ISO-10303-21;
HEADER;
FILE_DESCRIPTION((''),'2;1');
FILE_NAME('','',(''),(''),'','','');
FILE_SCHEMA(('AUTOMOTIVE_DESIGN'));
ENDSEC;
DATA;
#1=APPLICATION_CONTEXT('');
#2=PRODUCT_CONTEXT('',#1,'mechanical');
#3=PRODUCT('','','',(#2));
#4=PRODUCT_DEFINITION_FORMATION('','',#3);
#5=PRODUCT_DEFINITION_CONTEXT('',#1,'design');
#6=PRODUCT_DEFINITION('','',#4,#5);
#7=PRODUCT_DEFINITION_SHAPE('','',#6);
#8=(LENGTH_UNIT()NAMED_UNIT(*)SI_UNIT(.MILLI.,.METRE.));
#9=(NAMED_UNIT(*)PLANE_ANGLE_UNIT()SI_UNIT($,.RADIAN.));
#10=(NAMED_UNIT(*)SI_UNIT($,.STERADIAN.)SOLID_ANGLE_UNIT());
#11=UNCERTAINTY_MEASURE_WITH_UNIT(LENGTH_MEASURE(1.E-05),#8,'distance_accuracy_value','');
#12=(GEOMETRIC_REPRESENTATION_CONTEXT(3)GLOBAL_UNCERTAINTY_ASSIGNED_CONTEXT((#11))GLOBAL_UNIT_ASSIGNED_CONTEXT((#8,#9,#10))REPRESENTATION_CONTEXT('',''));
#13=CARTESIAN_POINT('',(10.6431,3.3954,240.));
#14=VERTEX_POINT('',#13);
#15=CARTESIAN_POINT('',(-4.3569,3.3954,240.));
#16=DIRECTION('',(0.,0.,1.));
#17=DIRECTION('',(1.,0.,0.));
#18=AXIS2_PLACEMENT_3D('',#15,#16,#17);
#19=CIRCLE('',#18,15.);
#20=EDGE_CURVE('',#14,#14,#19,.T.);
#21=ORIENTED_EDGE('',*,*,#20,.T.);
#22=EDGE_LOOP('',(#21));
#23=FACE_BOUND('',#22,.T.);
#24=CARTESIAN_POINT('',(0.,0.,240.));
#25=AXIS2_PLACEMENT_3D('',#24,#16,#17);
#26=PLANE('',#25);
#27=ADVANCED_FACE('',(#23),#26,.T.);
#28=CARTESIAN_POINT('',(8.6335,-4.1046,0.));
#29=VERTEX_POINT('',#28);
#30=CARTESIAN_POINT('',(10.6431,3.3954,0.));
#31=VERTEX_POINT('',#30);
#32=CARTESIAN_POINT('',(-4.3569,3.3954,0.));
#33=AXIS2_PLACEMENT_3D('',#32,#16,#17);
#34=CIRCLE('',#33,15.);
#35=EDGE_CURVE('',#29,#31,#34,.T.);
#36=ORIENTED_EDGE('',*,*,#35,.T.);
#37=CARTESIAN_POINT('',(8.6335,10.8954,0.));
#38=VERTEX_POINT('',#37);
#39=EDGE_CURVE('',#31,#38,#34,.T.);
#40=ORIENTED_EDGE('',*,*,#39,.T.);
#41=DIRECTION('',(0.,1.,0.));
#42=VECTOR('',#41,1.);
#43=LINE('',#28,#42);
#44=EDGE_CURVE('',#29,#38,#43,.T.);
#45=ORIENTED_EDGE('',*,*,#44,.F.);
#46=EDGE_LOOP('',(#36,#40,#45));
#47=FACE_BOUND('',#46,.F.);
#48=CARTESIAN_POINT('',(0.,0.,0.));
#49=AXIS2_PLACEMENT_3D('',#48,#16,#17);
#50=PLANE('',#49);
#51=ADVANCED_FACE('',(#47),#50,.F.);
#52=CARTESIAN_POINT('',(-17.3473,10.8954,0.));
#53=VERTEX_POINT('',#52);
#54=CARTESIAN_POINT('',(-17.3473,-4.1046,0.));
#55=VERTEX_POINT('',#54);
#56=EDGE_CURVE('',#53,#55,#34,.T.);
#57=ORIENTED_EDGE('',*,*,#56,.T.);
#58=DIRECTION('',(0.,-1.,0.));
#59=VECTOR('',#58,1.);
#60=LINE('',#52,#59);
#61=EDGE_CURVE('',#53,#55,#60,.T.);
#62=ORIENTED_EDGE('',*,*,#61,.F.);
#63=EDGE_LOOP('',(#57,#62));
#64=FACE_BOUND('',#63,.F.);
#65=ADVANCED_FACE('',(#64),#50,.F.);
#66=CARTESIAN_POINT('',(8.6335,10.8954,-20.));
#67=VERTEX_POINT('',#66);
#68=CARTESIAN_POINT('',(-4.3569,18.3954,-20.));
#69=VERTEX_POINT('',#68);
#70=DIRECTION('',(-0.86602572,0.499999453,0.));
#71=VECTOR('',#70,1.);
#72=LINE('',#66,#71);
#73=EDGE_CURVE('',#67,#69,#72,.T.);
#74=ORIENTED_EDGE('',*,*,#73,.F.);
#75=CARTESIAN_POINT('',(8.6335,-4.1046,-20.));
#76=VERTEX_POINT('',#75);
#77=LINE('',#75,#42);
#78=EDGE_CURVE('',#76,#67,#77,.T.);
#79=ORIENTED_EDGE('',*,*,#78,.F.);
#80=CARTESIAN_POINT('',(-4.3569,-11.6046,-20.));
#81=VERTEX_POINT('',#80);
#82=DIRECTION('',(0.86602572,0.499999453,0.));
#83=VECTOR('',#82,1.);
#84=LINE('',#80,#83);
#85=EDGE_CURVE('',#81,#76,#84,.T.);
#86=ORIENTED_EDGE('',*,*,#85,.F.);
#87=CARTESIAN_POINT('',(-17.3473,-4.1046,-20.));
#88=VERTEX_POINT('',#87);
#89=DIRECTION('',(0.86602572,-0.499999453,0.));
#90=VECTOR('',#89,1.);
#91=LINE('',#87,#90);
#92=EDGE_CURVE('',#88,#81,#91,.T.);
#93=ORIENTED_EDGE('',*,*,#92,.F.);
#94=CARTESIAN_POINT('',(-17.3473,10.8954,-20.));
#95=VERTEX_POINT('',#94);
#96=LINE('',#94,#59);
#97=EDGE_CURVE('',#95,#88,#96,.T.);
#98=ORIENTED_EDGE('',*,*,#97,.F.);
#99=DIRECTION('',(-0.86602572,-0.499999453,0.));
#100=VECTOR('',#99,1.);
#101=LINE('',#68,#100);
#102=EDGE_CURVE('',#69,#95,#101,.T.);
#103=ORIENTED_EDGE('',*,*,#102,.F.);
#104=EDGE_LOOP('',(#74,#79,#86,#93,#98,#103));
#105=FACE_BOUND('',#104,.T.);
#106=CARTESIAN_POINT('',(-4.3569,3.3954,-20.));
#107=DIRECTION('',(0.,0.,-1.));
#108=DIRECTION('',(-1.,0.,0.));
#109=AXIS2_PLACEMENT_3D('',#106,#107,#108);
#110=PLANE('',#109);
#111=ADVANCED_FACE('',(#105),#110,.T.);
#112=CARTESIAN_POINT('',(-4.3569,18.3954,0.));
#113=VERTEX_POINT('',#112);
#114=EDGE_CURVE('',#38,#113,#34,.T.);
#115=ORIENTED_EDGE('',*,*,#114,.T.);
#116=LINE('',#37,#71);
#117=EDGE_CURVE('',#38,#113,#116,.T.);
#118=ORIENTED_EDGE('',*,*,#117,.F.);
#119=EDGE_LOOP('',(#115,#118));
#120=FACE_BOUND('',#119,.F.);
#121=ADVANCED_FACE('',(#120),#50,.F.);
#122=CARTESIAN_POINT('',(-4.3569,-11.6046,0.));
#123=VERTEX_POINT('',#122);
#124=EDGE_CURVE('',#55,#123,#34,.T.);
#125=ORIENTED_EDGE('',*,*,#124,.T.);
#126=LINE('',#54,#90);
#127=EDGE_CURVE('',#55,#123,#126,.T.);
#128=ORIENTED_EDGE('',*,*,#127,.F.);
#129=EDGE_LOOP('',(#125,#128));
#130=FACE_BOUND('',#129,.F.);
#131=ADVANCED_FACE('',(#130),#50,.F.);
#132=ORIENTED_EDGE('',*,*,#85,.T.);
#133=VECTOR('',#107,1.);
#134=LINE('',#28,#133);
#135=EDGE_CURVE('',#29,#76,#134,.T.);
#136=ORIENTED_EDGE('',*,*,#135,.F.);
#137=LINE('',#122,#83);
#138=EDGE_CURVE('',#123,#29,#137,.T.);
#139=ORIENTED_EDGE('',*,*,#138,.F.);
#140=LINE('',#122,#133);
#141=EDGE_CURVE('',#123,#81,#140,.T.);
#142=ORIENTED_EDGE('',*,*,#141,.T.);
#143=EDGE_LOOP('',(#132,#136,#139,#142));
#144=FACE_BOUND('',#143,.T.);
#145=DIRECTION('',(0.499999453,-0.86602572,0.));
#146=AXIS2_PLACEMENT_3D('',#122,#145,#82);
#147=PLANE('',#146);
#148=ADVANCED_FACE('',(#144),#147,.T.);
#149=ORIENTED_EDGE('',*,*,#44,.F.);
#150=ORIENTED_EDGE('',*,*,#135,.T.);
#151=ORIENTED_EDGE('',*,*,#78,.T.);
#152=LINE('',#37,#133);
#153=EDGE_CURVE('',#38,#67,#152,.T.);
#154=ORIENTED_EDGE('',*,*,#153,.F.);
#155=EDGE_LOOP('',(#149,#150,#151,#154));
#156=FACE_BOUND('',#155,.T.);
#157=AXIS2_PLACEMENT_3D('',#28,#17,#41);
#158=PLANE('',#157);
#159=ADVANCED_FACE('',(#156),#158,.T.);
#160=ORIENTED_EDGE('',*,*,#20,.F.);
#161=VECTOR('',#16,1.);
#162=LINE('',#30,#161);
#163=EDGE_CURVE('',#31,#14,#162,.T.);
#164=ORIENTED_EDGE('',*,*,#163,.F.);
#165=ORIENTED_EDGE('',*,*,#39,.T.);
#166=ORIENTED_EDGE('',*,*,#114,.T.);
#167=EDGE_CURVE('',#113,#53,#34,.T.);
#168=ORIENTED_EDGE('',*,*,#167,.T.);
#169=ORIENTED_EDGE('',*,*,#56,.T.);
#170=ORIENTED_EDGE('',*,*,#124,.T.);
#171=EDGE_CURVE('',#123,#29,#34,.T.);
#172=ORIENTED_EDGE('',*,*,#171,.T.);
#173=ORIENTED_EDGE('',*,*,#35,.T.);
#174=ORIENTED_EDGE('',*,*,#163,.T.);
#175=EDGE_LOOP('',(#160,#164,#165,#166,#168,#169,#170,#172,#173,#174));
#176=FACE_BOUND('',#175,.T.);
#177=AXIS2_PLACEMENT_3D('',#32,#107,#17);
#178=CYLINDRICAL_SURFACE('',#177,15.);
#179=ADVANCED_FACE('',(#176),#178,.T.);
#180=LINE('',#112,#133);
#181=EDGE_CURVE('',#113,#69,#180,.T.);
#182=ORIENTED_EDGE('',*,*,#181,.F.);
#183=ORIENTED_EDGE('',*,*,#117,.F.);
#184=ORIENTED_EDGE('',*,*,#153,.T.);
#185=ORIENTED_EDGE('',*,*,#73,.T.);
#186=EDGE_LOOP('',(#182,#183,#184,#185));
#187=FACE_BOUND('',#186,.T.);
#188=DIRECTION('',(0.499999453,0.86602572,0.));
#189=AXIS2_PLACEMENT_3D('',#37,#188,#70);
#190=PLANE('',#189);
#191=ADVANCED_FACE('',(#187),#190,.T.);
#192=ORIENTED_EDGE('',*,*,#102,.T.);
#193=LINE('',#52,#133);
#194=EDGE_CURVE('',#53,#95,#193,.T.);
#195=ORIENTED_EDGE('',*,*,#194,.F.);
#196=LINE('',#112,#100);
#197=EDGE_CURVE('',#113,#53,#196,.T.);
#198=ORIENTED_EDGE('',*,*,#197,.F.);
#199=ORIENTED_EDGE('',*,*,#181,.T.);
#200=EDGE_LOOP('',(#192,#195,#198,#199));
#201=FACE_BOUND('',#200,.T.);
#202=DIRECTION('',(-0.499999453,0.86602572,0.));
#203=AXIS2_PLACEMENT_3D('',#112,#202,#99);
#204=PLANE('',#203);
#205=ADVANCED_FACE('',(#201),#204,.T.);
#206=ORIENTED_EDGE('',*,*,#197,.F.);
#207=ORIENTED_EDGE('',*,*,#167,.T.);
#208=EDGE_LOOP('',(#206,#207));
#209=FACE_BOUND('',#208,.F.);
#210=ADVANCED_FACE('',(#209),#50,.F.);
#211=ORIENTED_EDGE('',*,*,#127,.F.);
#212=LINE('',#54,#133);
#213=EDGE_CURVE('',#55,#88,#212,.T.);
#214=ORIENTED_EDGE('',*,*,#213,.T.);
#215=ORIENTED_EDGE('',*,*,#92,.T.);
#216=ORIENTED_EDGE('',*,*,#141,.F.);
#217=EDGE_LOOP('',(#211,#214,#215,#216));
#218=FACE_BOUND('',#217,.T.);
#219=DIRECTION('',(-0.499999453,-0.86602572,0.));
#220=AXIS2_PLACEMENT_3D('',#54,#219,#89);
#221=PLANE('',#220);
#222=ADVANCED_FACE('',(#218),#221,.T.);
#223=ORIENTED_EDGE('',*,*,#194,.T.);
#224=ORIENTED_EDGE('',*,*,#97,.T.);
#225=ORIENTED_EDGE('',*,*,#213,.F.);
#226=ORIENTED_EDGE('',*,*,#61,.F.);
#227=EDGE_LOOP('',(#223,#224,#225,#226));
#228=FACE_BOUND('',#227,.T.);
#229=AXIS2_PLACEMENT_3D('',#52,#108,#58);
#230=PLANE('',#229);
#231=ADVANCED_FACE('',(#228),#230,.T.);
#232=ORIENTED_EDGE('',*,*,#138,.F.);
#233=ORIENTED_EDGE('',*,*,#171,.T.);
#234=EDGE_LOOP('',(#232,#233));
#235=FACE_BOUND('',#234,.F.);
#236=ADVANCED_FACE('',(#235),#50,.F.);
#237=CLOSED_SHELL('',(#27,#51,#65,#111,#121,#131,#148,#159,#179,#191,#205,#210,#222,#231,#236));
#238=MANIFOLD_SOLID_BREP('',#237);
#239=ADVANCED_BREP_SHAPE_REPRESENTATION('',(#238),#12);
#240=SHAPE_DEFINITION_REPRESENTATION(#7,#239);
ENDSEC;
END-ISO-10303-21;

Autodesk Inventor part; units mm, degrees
ref_plane "YZ Plane" through (0, 0, 0) normal (1, 0, 0) x (0, 1, 0)
ref_plane "XZ Plane" through (0, 0, 0) normal (0, 1, 0) x (-1, 0, 0)
ref_plane "XY Plane" through (0, 0, 0) normal (0, 0, 1) x (1, 0, 0)
sketch "Szkic1" plane through (0, 0, 0) normal (0, 0, 1) x (1, 0, 0)
  circle A0 centre (-4.3569, 3.3954) radius 15
  point P0 (0, 0)
  dimension "d0" = 30
extrude "Wyciągnięcie proste1" add sketch "Szkic1" along normal blind 240
thread "Gwint1" size "TR30x3" class "7e" standard "ISO Metric Trapezoidal Threads" length 230 offset 130
thread "Gwint2" size "TR30x3" class "7e" standard "ISO Metric Trapezoidal Threads" length 110 offset 10
sketch "Szkic2" plane through (-4.3569, 3.3954, 0) normal (0, 0, -1) x (-1, 0, 0)
  circle A0 centre (0, 0) radius 15 projected
  line L0 (0, 15) -> (12.9904, 7.5)
  line L1 (12.9904, 7.5) -> (12.9904, -7.5)
  line L2 (12.9904, -7.5) -> (0, -15)
  line L3 (0, -15) -> (-12.9904, -7.5)
  line L4 (-12.9904, -7.5) -> (-12.9904, 7.5)
  line L5 (-12.9904, 7.5) -> (0, 15)
  point P0 (-4.3569, -3.3954)
  dimension "d9" = 360
extrude "Wyciągnięcie proste2" add sketch "Szkic2" along normal blind 20 contours L1 L2 L3 L4 L5 L0
properties part number "śruba"
